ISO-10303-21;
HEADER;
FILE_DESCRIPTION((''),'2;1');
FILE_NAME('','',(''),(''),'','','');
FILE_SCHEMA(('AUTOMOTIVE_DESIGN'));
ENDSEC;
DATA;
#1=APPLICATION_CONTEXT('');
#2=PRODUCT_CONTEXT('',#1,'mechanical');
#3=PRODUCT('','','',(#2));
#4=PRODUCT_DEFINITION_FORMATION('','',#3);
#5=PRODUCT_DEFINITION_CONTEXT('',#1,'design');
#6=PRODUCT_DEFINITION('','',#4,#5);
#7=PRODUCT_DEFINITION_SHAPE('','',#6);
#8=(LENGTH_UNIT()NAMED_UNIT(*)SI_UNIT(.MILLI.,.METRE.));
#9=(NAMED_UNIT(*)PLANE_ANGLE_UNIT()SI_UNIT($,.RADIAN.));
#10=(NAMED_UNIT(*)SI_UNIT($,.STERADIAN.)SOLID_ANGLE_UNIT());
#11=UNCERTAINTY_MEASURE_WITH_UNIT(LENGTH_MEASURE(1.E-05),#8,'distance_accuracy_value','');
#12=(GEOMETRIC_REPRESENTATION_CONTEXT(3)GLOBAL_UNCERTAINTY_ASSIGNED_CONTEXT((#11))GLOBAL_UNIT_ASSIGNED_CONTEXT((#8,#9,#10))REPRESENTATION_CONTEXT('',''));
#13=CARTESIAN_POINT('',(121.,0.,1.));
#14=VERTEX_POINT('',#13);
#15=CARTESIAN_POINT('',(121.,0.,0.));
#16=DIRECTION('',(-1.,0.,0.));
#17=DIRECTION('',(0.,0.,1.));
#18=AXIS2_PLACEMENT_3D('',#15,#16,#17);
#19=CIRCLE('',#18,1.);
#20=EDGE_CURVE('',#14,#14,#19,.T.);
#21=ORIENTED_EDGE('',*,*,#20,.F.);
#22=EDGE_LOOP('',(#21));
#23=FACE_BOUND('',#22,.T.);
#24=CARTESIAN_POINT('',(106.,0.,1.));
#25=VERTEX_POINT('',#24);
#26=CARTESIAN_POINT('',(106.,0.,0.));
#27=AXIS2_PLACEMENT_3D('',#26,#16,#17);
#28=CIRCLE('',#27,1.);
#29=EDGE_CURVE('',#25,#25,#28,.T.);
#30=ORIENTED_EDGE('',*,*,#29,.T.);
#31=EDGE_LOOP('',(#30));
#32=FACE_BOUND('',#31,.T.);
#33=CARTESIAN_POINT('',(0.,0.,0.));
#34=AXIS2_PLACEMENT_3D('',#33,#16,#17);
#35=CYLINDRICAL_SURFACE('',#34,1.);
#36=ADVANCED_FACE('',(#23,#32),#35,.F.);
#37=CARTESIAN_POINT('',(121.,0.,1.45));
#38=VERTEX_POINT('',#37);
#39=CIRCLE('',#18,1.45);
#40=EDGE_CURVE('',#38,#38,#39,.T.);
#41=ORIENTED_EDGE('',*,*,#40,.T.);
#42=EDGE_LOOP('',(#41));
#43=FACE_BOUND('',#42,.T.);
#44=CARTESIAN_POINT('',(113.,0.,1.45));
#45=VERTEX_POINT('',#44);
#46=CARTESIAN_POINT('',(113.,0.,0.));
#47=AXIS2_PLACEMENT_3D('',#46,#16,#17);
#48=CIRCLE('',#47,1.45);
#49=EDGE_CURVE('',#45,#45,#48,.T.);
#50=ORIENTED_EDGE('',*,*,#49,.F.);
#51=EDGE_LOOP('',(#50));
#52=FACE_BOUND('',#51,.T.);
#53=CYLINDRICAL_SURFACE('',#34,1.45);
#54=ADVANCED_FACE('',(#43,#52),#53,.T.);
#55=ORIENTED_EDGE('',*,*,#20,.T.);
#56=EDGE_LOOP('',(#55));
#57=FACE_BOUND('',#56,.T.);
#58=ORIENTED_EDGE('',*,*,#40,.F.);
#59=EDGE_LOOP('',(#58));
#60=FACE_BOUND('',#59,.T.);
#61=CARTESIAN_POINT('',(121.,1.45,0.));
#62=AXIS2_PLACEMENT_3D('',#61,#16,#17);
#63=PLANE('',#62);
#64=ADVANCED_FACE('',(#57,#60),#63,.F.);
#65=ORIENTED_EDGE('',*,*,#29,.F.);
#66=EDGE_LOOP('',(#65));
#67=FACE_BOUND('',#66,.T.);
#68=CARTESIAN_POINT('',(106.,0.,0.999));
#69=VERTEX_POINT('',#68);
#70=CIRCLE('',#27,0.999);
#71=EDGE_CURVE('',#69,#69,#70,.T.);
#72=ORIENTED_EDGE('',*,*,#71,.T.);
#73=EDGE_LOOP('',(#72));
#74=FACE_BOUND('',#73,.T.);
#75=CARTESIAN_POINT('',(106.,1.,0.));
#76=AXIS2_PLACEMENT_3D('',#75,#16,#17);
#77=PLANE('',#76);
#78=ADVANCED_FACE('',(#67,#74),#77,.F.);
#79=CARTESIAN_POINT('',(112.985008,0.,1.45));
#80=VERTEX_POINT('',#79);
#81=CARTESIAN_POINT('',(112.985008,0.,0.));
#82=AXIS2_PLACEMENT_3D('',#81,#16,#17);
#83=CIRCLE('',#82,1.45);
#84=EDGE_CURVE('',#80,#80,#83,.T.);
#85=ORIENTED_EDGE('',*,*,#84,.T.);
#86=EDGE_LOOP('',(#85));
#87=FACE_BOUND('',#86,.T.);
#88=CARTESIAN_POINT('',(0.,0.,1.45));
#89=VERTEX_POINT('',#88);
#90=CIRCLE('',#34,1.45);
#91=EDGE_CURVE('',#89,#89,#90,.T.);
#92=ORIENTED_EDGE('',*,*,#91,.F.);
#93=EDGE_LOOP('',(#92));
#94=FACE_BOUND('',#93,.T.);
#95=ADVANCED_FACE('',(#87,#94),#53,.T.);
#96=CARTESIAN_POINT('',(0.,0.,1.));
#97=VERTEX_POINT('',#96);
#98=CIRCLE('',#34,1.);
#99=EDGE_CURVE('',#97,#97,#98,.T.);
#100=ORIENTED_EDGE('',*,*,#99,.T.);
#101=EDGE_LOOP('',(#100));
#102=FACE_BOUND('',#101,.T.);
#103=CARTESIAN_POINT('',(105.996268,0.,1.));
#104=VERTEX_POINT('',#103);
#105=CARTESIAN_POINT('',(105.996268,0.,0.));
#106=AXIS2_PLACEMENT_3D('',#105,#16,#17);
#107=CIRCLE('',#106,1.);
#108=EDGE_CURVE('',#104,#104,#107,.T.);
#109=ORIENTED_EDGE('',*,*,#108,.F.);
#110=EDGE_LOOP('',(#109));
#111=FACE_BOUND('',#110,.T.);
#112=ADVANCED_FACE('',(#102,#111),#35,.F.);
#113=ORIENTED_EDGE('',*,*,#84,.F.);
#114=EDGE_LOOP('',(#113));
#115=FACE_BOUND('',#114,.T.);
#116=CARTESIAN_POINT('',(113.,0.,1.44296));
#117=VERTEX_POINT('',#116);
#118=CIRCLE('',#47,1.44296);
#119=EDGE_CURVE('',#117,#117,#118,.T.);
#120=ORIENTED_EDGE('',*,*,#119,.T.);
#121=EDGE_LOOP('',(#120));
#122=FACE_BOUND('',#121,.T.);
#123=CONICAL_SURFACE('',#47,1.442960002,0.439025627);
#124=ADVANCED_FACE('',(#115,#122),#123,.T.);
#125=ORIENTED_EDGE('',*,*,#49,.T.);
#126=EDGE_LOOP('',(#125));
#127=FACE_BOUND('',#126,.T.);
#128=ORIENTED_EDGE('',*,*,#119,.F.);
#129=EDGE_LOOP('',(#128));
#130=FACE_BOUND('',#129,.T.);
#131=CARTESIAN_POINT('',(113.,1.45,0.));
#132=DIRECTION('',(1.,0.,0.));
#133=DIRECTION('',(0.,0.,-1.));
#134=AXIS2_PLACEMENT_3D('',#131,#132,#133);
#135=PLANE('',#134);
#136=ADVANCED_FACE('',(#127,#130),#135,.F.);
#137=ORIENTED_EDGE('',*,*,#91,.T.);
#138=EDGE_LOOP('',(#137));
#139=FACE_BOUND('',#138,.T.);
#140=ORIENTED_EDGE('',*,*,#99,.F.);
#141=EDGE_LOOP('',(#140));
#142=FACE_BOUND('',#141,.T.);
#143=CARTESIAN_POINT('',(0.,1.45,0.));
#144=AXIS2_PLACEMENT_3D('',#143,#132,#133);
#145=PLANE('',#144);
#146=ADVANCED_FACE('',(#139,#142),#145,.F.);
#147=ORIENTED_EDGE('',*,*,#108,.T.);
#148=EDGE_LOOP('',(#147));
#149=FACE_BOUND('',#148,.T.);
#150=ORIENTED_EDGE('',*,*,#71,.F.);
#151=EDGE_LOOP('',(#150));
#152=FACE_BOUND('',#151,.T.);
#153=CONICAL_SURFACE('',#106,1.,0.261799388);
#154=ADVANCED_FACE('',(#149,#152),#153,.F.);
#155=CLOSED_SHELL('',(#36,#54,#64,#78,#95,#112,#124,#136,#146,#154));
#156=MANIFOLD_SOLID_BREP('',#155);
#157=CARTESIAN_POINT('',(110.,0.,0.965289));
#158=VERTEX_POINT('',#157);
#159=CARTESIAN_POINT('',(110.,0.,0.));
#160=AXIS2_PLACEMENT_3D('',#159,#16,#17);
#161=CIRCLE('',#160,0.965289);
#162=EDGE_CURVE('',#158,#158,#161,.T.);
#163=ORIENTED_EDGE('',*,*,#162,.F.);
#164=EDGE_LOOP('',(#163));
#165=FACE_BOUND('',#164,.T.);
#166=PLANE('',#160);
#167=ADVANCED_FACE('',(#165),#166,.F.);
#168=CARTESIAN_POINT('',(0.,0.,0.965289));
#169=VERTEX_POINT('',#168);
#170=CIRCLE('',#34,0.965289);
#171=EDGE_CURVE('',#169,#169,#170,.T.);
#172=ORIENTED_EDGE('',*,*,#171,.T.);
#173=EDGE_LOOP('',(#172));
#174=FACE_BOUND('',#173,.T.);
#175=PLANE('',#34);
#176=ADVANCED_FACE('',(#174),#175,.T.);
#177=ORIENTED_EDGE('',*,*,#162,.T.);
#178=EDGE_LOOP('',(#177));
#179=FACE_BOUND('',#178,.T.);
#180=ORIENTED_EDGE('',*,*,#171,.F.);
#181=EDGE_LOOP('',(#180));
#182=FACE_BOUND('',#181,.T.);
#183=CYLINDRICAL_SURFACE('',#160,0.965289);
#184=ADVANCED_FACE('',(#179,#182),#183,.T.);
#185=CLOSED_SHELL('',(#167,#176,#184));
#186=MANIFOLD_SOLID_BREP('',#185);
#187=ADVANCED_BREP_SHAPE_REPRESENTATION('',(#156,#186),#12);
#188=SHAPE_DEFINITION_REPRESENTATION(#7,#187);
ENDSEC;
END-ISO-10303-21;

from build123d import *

# Parameters (mm, degrees)
ESBO_O1_R                = 0.96528919
RESSALTO_EXTRUS_O1_DEPTH = 110


# Read off the part's stored shape, not the designer's step: Base-Revolve
with BuildPart() as part:
    # Base-Revolve outline → Base-Revolve (revolve)
    with BuildSketch(Plane.YX):
        Polygon((1.45, 121), (1, 121), (1, 106), (0.999, 106), (1, 105.996267949), (1, 0), (1.45, 0), (1.45, 112.985008226), (1.442960002, 113), (1.45, 113), align=None)
    revolve(axis=Axis((0, 0, 0), (1, 0, 0)))


with BuildPart() as body_2:
    # Esboço1 → Ressalto-extrusão1 (new body)
    with BuildSketch(Plane.ZY):
        Circle(ESBO_O1_R)
    extrude(amount=-RESSALTO_EXTRUS_O1_DEPTH)


solid = Compound([part.part, body_2.part])
